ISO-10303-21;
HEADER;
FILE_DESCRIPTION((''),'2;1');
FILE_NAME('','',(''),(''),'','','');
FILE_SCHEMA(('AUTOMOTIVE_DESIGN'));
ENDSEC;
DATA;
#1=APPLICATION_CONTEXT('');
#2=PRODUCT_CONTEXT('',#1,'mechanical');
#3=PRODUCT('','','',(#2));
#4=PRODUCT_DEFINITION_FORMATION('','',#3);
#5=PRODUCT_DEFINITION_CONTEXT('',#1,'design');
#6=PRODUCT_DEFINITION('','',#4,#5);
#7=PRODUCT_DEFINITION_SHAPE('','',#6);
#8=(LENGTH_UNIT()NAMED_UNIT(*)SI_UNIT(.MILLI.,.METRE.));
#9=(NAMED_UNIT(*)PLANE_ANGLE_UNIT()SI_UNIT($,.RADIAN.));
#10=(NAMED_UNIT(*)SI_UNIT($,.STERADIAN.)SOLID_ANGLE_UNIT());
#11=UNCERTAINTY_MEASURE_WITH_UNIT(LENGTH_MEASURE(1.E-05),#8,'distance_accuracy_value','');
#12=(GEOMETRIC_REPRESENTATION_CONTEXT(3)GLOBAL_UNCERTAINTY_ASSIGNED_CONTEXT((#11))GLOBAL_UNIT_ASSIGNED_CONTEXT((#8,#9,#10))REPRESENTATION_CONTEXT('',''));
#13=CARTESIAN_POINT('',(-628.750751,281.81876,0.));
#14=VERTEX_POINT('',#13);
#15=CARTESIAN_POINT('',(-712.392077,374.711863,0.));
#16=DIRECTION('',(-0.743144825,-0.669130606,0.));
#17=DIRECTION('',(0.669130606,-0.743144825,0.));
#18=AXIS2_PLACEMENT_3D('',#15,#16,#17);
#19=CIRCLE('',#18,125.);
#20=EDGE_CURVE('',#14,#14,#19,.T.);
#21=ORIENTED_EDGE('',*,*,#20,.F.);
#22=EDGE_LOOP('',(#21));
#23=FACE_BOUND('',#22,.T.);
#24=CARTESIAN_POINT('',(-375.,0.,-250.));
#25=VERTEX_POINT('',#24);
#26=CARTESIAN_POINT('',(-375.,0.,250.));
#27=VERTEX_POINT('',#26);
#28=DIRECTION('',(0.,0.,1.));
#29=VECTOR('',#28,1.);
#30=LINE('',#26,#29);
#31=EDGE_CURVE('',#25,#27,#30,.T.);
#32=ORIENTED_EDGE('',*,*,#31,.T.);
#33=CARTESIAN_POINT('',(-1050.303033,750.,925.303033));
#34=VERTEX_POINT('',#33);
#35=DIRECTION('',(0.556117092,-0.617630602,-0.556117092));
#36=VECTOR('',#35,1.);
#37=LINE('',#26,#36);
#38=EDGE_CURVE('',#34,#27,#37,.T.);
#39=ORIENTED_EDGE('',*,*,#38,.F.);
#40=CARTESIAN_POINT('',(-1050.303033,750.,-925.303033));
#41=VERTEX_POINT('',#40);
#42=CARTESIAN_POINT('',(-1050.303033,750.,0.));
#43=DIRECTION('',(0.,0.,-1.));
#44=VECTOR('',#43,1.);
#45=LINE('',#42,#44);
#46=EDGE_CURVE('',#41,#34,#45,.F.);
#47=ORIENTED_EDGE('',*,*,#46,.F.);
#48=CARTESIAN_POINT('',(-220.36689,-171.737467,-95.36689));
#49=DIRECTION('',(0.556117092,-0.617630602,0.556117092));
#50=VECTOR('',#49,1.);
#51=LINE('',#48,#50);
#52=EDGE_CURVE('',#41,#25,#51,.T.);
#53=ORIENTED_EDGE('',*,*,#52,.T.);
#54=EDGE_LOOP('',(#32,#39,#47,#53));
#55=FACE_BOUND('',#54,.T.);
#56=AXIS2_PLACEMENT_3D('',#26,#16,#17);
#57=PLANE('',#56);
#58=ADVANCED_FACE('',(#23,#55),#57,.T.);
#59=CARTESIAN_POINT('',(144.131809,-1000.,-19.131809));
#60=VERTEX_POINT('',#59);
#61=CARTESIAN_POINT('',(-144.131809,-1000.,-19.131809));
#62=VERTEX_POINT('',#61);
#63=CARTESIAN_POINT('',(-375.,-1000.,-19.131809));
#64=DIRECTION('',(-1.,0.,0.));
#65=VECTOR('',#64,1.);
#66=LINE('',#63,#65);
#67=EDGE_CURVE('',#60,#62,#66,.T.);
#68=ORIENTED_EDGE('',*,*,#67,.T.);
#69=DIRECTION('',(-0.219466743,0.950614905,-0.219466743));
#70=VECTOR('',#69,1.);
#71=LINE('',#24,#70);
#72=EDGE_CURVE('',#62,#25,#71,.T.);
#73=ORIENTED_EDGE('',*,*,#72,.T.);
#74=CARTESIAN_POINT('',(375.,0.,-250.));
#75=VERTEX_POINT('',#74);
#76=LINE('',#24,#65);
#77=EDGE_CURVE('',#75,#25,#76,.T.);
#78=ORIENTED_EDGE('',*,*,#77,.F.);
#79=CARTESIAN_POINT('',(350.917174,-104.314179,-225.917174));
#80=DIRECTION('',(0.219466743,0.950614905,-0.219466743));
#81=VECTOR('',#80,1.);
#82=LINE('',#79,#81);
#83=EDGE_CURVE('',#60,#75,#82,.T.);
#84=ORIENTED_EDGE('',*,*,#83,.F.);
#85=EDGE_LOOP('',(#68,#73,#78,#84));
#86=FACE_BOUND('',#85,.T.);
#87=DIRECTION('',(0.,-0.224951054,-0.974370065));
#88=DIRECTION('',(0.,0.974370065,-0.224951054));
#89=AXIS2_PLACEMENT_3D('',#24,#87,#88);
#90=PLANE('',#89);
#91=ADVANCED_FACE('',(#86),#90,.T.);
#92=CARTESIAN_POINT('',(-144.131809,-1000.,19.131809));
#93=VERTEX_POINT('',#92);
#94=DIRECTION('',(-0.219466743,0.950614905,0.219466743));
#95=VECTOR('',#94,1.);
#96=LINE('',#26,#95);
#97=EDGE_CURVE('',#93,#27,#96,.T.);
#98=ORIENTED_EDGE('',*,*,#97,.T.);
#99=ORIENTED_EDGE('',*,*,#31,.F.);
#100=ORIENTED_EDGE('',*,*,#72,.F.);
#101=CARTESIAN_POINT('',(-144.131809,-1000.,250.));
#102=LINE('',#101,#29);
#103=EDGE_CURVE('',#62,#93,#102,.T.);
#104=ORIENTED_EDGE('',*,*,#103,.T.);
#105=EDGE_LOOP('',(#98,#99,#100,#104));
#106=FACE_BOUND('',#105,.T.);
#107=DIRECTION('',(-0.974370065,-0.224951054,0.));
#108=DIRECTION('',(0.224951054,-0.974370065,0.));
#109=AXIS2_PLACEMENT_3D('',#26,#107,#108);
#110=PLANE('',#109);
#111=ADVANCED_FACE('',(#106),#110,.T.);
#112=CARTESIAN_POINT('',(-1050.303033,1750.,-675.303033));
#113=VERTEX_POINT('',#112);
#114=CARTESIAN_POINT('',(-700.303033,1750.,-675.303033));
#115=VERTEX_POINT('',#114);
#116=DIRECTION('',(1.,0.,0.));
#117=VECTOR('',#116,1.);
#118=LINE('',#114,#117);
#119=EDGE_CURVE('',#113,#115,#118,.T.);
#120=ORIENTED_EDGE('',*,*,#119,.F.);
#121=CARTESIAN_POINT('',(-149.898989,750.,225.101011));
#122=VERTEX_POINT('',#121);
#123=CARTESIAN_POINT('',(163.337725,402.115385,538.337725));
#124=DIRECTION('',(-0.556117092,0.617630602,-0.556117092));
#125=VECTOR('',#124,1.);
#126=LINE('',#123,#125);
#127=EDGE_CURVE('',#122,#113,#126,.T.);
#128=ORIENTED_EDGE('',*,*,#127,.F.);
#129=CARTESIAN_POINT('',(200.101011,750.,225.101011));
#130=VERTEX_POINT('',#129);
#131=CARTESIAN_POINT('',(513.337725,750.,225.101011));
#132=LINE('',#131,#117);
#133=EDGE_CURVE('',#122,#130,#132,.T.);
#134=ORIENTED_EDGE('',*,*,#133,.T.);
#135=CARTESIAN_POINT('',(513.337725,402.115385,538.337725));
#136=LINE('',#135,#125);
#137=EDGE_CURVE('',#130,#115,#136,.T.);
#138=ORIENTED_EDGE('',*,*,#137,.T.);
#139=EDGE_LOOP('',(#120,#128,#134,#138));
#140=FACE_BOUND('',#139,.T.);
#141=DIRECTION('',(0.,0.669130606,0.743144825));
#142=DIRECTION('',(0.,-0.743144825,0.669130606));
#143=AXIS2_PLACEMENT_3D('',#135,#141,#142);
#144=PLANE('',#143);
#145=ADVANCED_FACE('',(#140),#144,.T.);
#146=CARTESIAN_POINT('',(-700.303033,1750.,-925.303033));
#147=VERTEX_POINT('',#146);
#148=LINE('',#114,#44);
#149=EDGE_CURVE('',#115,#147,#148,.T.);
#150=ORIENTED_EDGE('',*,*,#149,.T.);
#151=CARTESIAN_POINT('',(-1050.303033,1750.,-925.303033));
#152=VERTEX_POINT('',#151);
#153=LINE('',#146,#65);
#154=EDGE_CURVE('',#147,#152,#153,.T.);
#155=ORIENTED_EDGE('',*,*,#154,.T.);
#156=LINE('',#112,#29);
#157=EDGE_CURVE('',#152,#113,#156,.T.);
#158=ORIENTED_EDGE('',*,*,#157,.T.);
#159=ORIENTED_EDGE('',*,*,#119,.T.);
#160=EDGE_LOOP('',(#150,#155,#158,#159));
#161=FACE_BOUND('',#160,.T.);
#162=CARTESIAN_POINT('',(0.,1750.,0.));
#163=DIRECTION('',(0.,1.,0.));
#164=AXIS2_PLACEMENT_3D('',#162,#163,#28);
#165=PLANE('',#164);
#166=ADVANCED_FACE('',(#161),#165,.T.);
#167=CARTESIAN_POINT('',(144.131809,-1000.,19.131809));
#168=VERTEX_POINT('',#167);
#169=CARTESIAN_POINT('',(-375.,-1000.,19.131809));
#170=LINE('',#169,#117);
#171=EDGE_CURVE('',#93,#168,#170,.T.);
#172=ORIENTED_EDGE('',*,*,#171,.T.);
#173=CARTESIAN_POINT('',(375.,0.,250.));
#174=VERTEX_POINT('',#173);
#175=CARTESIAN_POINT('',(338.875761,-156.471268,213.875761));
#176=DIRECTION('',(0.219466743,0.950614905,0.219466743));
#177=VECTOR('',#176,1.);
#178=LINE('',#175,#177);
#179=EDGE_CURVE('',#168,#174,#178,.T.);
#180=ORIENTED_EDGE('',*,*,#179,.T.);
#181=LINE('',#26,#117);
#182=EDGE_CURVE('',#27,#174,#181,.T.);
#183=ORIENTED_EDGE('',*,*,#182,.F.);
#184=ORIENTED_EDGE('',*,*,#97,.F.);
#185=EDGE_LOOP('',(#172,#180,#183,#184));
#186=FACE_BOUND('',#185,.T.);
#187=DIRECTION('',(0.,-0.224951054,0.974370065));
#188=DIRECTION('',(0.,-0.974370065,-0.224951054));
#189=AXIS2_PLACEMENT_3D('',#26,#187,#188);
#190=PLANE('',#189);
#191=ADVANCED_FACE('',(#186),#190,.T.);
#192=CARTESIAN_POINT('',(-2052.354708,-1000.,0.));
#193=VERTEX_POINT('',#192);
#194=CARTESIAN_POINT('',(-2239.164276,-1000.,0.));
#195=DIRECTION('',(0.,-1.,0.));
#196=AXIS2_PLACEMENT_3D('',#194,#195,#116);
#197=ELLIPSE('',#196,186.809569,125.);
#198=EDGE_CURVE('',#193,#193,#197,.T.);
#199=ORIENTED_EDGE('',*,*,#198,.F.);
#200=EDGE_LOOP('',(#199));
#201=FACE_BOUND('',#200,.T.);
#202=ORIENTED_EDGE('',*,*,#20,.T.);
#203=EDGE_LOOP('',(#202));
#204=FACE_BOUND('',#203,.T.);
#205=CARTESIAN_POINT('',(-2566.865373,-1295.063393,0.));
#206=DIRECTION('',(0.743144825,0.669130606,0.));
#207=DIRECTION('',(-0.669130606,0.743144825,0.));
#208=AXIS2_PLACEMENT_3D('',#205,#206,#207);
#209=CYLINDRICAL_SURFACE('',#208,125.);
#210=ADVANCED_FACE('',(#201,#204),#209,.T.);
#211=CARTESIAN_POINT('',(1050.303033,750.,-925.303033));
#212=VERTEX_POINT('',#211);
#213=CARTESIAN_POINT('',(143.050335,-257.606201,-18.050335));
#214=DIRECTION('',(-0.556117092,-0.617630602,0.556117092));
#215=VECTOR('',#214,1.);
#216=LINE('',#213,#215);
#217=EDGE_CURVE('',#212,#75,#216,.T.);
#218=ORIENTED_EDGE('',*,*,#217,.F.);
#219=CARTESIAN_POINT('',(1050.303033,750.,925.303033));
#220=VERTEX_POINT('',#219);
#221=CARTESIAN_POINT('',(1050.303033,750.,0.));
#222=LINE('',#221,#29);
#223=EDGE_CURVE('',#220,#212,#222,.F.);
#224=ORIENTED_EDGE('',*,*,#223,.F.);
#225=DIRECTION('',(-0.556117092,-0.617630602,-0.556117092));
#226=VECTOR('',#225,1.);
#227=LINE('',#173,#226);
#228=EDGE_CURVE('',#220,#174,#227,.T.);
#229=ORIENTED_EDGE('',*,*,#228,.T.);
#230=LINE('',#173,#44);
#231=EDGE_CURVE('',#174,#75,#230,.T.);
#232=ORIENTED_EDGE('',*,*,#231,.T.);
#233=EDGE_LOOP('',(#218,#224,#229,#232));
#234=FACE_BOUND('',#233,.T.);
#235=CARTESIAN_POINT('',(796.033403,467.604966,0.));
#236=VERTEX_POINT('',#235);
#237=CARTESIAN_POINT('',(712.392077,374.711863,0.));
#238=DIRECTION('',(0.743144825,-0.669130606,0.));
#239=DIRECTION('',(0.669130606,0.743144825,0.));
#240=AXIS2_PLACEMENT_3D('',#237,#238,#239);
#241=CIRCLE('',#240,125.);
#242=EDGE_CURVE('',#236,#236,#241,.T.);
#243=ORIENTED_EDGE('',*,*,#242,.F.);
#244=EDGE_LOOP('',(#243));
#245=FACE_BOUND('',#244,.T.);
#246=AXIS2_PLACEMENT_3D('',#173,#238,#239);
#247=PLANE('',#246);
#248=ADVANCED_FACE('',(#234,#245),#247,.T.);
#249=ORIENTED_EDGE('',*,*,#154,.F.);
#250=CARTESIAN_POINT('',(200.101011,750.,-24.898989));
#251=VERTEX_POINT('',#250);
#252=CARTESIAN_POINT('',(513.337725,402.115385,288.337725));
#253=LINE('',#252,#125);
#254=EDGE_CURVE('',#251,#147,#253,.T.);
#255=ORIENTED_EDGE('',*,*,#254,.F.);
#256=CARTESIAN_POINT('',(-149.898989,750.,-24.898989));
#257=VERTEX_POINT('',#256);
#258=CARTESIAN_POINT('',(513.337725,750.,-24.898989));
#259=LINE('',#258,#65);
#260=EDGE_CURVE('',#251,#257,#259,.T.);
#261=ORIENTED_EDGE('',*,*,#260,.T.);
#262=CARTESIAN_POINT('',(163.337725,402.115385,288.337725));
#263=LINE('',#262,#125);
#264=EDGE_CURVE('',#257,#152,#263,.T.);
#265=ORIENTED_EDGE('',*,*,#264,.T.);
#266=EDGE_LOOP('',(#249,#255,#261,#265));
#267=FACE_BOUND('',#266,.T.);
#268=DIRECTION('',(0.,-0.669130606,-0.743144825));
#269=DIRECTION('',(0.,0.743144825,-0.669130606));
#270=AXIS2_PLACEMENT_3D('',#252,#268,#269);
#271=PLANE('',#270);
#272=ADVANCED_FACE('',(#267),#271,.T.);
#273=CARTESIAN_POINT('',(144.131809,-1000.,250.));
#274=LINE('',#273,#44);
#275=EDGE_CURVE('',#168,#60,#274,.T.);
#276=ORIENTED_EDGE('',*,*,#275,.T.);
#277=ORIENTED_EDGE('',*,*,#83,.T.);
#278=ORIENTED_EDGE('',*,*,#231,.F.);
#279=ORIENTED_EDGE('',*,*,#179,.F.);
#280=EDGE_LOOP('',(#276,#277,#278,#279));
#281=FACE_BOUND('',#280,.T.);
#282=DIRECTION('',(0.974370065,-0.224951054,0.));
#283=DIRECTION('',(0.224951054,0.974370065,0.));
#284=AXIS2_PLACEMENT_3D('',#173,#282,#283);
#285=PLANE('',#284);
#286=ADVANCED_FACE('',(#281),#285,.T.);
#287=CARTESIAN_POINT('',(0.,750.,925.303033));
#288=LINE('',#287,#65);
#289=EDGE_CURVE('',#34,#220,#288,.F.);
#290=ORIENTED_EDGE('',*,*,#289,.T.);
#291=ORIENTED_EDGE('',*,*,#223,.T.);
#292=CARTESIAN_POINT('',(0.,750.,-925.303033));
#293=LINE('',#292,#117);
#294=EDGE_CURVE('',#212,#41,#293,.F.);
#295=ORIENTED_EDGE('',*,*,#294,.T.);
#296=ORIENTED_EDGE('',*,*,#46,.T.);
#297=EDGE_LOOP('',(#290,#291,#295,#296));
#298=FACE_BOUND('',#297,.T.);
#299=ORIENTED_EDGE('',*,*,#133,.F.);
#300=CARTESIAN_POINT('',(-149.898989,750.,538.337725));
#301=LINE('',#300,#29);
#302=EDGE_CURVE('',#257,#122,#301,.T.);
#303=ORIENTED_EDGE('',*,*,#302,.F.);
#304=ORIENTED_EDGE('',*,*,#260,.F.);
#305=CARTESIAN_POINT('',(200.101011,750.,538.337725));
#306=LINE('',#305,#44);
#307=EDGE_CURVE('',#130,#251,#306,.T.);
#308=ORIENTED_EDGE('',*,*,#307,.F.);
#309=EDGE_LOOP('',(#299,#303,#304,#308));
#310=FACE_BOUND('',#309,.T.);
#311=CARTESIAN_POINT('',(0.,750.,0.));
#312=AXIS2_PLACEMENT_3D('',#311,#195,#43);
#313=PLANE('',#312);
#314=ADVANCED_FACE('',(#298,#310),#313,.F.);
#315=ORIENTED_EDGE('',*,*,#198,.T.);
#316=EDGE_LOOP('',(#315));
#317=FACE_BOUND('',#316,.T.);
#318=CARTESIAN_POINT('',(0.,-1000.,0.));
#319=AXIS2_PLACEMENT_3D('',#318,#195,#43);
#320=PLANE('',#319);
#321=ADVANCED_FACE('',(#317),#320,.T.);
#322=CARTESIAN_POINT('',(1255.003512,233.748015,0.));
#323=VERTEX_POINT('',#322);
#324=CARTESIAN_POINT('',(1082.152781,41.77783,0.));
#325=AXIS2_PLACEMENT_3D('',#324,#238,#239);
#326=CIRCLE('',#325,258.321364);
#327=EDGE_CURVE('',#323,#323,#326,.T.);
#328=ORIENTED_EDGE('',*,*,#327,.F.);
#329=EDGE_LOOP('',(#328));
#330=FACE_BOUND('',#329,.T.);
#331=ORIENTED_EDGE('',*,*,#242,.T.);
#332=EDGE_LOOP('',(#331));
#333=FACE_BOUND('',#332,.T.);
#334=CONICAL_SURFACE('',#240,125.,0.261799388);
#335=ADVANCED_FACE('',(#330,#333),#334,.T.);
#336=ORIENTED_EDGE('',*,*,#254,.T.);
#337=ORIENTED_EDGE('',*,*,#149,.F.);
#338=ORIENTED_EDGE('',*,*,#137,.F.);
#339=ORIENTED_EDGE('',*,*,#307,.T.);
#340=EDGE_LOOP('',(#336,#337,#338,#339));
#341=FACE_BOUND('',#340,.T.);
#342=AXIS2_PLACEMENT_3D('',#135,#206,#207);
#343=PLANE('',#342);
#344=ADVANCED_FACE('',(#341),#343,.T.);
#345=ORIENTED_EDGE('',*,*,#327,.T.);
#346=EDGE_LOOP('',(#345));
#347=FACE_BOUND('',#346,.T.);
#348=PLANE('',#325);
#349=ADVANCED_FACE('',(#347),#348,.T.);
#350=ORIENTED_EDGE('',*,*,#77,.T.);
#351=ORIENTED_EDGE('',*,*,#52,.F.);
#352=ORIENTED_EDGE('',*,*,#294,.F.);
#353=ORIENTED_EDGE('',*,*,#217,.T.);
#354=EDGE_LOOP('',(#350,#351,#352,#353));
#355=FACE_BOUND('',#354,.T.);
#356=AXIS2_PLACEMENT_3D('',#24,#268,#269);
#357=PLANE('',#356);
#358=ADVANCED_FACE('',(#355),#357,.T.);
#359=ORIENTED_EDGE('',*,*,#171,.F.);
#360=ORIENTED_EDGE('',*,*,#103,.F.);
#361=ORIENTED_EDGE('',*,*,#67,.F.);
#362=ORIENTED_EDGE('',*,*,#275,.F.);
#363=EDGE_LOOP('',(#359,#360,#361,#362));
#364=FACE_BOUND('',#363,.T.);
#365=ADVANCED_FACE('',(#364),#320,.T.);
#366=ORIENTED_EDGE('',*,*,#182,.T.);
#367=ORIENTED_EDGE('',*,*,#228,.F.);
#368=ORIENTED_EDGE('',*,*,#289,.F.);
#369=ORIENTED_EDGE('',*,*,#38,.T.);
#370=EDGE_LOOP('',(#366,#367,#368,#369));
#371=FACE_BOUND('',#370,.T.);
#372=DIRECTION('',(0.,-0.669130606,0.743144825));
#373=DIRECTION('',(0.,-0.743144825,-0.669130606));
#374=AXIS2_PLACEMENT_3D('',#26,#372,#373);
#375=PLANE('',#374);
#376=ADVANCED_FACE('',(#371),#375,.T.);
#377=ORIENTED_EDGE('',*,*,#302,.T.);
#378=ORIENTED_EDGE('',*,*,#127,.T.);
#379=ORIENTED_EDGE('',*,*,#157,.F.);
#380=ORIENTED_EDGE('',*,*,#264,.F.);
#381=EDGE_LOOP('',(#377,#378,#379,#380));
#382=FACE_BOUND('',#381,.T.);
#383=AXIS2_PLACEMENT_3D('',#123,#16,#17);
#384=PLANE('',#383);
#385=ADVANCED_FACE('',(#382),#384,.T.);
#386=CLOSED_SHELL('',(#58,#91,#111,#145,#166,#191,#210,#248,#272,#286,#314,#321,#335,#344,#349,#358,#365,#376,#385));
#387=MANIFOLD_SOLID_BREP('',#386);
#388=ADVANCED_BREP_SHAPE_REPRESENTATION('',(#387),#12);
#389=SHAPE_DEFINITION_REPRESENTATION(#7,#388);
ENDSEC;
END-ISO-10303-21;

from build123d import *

# Parameters (mm, degrees)
SKETCH1_W           = 750
SKETCH1_H           = 500
BOSS_EXTRUDE1_DEPTH = 1000
BOSS_EXTRUDE1_DRAFT = -13
SKETCH1_2_W         = 750
SKETCH1_2_H         = 500
BOSS_EXTRUDE2_DEPTH = 750
BOSS_EXTRUDE2_TAPER = -42
SKETCH2_R           = 125
BOSS_EXTRUDE3_DEPTH = 497.562106
BOSS_EXTRUDE3_DRAFT = -15
BOSS_EXTRUDE4_REACH = 2194.301
SKETCH4_R           = 125


with BuildPart() as part:
    # Sketch1 → Boss-Extrude1 (with draft: the straight prism first)
    with BuildSketch(Plane(origin=(0, 0, 0), x_dir=(1, 0, 0), z_dir=(0, 1, 0))):
        Rectangle(SKETCH1_W, SKETCH1_H)
    extrude(amount=-BOSS_EXTRUDE1_DEPTH)
    # Boss-Extrude1: the draft: its side faces are tilted about the plane it starts from
    boss_extrude1_sides = [part.faces().sort_by_distance(p)[0] for p in [
        (0, -500, 250),
        (375, -500, 0),
        (0, -500, -250),
        (-375, -500, 0),
    ]]
    draft(boss_extrude1_sides, Plane(origin=(0, 0, 0), x_dir=(1, 0, 0), z_dir=(0, 1, 0)), BOSS_EXTRUDE1_DRAFT)

    # Sketch1<2> → Boss-Extrude2 (add)
    with BuildSketch(Plane(origin=(0, 0, 0), x_dir=(1, 0, 0), z_dir=(0, 1, 0))):
        Rectangle(SKETCH1_2_W, SKETCH1_2_H)
    extrude(amount=BOSS_EXTRUDE2_DEPTH, taper=BOSS_EXTRUDE2_TAPER)


with BuildPart() as boss_extrude3_tool:
    # Sketch2 → Boss-Extrude3 (with draft: the straight prism first)
    with BuildSketch(Plane(origin=(207.099086863, -186.472855382, 0), x_dir=(0, 0, -1), z_dir=(0.7431448254773932, -0.6691306063588595, 0))):
        with Locations((0, 755.148524589)):
            Circle(SKETCH2_R)
    extrude(amount=BOSS_EXTRUDE3_DEPTH)
    # Boss-Extrude3: the draft: its side faces are tilted about the plane it starts from
    boss_extrude3_sides = [boss_extrude3_tool.faces().sort_by_distance(p)[0] for p in [
        (897.272429226, 208.244846289, 125),
    ]]
    draft(boss_extrude3_sides, Plane(origin=(207.099086863, -186.472855382, 0), x_dir=(0, 0, -1), z_dir=(0.7431448254773932, -0.6691306063588595, 0)), BOSS_EXTRUDE3_DRAFT)


with BuildPart() as part_1:
    add(part.part)

    # Boss-Extrude3: add boss_extrude3_tool
    add(boss_extrude3_tool.part)

    # Boss-Extrude4: up to this plane
    boss_extrude4_end = Plane(origin=(0, -1000, 0), z_dir=(0, -1, 0))
    # Sketch4 → Boss-Extrude4 (add, up to the surface)
    with BuildSketch(Plane(origin=(-207.099086863, -186.472855382, 0), x_dir=(0, 0, 1), z_dir=(-0.7431448254773932, -0.6691306063588595, 0)), mode=Mode.PRIVATE) as boss_extrude4_sk1:
        with Locations(Location((0, 755.148524589, 0), (0, 0, 270))):
            Circle(SKETCH4_R)
    boss_extrude4_tool1 = split(extrude(boss_extrude4_sk1.sketch, amount=BOSS_EXTRUDE4_REACH, mode=Mode.PRIVATE), bisect_by=boss_extrude4_end, keep=Keep.BOTH, mode=Mode.PRIVATE)
    add(boss_extrude4_tool1.solids().sort_by_distance((-712.392077, 374.711863, 0))[0])

    # Boss-Extrude5: read off the stored shape, not the designer's step
    # Boss-Extrude5: loft between two sections, ruled curve by curve
    boss_extrude5_from = [
        Edge.make_line((-1050.303033223, 1750, -675.303033223), (-700.303033223, 1750, -675.303033223)),
        Edge.make_line((-700.303033223, 1750, -675.303033223), (-700.303033223, 1750, -925.303033223)),
        Edge.make_line((-700.303033223, 1750, -925.303033223), (-1050.303033223, 1750, -925.303033223)),
        Edge.make_line((-1050.303033223, 1750, -925.303033223), (-1050.303033223, 1750, -675.303033223)),
    ]
    boss_extrude5_to = [
        Edge.make_line((-149.898988926, 750, 225.101011074), (200.101011074, 750, 225.101011074)),
        Edge.make_line((200.101011074, 750, 225.101011074), (200.101011074, 750, -24.898988926)),
        Edge.make_line((200.101011074, 750, -24.898988926), (-149.898988926, 750, -24.898988926)),
        Edge.make_line((-149.898988926, 750, -24.898988926), (-149.898988926, 750, 225.101011074)),
    ]
    boss_extrude5 = Solid(Shell([*[Face.make_surface_from_curves(boss_extrude5_from[k], boss_extrude5_to[k]) for k in range(4)], Face(Wire(boss_extrude5_from)), Face(Wire(boss_extrude5_to))]))
    add(boss_extrude5)


solid = part_1.part
